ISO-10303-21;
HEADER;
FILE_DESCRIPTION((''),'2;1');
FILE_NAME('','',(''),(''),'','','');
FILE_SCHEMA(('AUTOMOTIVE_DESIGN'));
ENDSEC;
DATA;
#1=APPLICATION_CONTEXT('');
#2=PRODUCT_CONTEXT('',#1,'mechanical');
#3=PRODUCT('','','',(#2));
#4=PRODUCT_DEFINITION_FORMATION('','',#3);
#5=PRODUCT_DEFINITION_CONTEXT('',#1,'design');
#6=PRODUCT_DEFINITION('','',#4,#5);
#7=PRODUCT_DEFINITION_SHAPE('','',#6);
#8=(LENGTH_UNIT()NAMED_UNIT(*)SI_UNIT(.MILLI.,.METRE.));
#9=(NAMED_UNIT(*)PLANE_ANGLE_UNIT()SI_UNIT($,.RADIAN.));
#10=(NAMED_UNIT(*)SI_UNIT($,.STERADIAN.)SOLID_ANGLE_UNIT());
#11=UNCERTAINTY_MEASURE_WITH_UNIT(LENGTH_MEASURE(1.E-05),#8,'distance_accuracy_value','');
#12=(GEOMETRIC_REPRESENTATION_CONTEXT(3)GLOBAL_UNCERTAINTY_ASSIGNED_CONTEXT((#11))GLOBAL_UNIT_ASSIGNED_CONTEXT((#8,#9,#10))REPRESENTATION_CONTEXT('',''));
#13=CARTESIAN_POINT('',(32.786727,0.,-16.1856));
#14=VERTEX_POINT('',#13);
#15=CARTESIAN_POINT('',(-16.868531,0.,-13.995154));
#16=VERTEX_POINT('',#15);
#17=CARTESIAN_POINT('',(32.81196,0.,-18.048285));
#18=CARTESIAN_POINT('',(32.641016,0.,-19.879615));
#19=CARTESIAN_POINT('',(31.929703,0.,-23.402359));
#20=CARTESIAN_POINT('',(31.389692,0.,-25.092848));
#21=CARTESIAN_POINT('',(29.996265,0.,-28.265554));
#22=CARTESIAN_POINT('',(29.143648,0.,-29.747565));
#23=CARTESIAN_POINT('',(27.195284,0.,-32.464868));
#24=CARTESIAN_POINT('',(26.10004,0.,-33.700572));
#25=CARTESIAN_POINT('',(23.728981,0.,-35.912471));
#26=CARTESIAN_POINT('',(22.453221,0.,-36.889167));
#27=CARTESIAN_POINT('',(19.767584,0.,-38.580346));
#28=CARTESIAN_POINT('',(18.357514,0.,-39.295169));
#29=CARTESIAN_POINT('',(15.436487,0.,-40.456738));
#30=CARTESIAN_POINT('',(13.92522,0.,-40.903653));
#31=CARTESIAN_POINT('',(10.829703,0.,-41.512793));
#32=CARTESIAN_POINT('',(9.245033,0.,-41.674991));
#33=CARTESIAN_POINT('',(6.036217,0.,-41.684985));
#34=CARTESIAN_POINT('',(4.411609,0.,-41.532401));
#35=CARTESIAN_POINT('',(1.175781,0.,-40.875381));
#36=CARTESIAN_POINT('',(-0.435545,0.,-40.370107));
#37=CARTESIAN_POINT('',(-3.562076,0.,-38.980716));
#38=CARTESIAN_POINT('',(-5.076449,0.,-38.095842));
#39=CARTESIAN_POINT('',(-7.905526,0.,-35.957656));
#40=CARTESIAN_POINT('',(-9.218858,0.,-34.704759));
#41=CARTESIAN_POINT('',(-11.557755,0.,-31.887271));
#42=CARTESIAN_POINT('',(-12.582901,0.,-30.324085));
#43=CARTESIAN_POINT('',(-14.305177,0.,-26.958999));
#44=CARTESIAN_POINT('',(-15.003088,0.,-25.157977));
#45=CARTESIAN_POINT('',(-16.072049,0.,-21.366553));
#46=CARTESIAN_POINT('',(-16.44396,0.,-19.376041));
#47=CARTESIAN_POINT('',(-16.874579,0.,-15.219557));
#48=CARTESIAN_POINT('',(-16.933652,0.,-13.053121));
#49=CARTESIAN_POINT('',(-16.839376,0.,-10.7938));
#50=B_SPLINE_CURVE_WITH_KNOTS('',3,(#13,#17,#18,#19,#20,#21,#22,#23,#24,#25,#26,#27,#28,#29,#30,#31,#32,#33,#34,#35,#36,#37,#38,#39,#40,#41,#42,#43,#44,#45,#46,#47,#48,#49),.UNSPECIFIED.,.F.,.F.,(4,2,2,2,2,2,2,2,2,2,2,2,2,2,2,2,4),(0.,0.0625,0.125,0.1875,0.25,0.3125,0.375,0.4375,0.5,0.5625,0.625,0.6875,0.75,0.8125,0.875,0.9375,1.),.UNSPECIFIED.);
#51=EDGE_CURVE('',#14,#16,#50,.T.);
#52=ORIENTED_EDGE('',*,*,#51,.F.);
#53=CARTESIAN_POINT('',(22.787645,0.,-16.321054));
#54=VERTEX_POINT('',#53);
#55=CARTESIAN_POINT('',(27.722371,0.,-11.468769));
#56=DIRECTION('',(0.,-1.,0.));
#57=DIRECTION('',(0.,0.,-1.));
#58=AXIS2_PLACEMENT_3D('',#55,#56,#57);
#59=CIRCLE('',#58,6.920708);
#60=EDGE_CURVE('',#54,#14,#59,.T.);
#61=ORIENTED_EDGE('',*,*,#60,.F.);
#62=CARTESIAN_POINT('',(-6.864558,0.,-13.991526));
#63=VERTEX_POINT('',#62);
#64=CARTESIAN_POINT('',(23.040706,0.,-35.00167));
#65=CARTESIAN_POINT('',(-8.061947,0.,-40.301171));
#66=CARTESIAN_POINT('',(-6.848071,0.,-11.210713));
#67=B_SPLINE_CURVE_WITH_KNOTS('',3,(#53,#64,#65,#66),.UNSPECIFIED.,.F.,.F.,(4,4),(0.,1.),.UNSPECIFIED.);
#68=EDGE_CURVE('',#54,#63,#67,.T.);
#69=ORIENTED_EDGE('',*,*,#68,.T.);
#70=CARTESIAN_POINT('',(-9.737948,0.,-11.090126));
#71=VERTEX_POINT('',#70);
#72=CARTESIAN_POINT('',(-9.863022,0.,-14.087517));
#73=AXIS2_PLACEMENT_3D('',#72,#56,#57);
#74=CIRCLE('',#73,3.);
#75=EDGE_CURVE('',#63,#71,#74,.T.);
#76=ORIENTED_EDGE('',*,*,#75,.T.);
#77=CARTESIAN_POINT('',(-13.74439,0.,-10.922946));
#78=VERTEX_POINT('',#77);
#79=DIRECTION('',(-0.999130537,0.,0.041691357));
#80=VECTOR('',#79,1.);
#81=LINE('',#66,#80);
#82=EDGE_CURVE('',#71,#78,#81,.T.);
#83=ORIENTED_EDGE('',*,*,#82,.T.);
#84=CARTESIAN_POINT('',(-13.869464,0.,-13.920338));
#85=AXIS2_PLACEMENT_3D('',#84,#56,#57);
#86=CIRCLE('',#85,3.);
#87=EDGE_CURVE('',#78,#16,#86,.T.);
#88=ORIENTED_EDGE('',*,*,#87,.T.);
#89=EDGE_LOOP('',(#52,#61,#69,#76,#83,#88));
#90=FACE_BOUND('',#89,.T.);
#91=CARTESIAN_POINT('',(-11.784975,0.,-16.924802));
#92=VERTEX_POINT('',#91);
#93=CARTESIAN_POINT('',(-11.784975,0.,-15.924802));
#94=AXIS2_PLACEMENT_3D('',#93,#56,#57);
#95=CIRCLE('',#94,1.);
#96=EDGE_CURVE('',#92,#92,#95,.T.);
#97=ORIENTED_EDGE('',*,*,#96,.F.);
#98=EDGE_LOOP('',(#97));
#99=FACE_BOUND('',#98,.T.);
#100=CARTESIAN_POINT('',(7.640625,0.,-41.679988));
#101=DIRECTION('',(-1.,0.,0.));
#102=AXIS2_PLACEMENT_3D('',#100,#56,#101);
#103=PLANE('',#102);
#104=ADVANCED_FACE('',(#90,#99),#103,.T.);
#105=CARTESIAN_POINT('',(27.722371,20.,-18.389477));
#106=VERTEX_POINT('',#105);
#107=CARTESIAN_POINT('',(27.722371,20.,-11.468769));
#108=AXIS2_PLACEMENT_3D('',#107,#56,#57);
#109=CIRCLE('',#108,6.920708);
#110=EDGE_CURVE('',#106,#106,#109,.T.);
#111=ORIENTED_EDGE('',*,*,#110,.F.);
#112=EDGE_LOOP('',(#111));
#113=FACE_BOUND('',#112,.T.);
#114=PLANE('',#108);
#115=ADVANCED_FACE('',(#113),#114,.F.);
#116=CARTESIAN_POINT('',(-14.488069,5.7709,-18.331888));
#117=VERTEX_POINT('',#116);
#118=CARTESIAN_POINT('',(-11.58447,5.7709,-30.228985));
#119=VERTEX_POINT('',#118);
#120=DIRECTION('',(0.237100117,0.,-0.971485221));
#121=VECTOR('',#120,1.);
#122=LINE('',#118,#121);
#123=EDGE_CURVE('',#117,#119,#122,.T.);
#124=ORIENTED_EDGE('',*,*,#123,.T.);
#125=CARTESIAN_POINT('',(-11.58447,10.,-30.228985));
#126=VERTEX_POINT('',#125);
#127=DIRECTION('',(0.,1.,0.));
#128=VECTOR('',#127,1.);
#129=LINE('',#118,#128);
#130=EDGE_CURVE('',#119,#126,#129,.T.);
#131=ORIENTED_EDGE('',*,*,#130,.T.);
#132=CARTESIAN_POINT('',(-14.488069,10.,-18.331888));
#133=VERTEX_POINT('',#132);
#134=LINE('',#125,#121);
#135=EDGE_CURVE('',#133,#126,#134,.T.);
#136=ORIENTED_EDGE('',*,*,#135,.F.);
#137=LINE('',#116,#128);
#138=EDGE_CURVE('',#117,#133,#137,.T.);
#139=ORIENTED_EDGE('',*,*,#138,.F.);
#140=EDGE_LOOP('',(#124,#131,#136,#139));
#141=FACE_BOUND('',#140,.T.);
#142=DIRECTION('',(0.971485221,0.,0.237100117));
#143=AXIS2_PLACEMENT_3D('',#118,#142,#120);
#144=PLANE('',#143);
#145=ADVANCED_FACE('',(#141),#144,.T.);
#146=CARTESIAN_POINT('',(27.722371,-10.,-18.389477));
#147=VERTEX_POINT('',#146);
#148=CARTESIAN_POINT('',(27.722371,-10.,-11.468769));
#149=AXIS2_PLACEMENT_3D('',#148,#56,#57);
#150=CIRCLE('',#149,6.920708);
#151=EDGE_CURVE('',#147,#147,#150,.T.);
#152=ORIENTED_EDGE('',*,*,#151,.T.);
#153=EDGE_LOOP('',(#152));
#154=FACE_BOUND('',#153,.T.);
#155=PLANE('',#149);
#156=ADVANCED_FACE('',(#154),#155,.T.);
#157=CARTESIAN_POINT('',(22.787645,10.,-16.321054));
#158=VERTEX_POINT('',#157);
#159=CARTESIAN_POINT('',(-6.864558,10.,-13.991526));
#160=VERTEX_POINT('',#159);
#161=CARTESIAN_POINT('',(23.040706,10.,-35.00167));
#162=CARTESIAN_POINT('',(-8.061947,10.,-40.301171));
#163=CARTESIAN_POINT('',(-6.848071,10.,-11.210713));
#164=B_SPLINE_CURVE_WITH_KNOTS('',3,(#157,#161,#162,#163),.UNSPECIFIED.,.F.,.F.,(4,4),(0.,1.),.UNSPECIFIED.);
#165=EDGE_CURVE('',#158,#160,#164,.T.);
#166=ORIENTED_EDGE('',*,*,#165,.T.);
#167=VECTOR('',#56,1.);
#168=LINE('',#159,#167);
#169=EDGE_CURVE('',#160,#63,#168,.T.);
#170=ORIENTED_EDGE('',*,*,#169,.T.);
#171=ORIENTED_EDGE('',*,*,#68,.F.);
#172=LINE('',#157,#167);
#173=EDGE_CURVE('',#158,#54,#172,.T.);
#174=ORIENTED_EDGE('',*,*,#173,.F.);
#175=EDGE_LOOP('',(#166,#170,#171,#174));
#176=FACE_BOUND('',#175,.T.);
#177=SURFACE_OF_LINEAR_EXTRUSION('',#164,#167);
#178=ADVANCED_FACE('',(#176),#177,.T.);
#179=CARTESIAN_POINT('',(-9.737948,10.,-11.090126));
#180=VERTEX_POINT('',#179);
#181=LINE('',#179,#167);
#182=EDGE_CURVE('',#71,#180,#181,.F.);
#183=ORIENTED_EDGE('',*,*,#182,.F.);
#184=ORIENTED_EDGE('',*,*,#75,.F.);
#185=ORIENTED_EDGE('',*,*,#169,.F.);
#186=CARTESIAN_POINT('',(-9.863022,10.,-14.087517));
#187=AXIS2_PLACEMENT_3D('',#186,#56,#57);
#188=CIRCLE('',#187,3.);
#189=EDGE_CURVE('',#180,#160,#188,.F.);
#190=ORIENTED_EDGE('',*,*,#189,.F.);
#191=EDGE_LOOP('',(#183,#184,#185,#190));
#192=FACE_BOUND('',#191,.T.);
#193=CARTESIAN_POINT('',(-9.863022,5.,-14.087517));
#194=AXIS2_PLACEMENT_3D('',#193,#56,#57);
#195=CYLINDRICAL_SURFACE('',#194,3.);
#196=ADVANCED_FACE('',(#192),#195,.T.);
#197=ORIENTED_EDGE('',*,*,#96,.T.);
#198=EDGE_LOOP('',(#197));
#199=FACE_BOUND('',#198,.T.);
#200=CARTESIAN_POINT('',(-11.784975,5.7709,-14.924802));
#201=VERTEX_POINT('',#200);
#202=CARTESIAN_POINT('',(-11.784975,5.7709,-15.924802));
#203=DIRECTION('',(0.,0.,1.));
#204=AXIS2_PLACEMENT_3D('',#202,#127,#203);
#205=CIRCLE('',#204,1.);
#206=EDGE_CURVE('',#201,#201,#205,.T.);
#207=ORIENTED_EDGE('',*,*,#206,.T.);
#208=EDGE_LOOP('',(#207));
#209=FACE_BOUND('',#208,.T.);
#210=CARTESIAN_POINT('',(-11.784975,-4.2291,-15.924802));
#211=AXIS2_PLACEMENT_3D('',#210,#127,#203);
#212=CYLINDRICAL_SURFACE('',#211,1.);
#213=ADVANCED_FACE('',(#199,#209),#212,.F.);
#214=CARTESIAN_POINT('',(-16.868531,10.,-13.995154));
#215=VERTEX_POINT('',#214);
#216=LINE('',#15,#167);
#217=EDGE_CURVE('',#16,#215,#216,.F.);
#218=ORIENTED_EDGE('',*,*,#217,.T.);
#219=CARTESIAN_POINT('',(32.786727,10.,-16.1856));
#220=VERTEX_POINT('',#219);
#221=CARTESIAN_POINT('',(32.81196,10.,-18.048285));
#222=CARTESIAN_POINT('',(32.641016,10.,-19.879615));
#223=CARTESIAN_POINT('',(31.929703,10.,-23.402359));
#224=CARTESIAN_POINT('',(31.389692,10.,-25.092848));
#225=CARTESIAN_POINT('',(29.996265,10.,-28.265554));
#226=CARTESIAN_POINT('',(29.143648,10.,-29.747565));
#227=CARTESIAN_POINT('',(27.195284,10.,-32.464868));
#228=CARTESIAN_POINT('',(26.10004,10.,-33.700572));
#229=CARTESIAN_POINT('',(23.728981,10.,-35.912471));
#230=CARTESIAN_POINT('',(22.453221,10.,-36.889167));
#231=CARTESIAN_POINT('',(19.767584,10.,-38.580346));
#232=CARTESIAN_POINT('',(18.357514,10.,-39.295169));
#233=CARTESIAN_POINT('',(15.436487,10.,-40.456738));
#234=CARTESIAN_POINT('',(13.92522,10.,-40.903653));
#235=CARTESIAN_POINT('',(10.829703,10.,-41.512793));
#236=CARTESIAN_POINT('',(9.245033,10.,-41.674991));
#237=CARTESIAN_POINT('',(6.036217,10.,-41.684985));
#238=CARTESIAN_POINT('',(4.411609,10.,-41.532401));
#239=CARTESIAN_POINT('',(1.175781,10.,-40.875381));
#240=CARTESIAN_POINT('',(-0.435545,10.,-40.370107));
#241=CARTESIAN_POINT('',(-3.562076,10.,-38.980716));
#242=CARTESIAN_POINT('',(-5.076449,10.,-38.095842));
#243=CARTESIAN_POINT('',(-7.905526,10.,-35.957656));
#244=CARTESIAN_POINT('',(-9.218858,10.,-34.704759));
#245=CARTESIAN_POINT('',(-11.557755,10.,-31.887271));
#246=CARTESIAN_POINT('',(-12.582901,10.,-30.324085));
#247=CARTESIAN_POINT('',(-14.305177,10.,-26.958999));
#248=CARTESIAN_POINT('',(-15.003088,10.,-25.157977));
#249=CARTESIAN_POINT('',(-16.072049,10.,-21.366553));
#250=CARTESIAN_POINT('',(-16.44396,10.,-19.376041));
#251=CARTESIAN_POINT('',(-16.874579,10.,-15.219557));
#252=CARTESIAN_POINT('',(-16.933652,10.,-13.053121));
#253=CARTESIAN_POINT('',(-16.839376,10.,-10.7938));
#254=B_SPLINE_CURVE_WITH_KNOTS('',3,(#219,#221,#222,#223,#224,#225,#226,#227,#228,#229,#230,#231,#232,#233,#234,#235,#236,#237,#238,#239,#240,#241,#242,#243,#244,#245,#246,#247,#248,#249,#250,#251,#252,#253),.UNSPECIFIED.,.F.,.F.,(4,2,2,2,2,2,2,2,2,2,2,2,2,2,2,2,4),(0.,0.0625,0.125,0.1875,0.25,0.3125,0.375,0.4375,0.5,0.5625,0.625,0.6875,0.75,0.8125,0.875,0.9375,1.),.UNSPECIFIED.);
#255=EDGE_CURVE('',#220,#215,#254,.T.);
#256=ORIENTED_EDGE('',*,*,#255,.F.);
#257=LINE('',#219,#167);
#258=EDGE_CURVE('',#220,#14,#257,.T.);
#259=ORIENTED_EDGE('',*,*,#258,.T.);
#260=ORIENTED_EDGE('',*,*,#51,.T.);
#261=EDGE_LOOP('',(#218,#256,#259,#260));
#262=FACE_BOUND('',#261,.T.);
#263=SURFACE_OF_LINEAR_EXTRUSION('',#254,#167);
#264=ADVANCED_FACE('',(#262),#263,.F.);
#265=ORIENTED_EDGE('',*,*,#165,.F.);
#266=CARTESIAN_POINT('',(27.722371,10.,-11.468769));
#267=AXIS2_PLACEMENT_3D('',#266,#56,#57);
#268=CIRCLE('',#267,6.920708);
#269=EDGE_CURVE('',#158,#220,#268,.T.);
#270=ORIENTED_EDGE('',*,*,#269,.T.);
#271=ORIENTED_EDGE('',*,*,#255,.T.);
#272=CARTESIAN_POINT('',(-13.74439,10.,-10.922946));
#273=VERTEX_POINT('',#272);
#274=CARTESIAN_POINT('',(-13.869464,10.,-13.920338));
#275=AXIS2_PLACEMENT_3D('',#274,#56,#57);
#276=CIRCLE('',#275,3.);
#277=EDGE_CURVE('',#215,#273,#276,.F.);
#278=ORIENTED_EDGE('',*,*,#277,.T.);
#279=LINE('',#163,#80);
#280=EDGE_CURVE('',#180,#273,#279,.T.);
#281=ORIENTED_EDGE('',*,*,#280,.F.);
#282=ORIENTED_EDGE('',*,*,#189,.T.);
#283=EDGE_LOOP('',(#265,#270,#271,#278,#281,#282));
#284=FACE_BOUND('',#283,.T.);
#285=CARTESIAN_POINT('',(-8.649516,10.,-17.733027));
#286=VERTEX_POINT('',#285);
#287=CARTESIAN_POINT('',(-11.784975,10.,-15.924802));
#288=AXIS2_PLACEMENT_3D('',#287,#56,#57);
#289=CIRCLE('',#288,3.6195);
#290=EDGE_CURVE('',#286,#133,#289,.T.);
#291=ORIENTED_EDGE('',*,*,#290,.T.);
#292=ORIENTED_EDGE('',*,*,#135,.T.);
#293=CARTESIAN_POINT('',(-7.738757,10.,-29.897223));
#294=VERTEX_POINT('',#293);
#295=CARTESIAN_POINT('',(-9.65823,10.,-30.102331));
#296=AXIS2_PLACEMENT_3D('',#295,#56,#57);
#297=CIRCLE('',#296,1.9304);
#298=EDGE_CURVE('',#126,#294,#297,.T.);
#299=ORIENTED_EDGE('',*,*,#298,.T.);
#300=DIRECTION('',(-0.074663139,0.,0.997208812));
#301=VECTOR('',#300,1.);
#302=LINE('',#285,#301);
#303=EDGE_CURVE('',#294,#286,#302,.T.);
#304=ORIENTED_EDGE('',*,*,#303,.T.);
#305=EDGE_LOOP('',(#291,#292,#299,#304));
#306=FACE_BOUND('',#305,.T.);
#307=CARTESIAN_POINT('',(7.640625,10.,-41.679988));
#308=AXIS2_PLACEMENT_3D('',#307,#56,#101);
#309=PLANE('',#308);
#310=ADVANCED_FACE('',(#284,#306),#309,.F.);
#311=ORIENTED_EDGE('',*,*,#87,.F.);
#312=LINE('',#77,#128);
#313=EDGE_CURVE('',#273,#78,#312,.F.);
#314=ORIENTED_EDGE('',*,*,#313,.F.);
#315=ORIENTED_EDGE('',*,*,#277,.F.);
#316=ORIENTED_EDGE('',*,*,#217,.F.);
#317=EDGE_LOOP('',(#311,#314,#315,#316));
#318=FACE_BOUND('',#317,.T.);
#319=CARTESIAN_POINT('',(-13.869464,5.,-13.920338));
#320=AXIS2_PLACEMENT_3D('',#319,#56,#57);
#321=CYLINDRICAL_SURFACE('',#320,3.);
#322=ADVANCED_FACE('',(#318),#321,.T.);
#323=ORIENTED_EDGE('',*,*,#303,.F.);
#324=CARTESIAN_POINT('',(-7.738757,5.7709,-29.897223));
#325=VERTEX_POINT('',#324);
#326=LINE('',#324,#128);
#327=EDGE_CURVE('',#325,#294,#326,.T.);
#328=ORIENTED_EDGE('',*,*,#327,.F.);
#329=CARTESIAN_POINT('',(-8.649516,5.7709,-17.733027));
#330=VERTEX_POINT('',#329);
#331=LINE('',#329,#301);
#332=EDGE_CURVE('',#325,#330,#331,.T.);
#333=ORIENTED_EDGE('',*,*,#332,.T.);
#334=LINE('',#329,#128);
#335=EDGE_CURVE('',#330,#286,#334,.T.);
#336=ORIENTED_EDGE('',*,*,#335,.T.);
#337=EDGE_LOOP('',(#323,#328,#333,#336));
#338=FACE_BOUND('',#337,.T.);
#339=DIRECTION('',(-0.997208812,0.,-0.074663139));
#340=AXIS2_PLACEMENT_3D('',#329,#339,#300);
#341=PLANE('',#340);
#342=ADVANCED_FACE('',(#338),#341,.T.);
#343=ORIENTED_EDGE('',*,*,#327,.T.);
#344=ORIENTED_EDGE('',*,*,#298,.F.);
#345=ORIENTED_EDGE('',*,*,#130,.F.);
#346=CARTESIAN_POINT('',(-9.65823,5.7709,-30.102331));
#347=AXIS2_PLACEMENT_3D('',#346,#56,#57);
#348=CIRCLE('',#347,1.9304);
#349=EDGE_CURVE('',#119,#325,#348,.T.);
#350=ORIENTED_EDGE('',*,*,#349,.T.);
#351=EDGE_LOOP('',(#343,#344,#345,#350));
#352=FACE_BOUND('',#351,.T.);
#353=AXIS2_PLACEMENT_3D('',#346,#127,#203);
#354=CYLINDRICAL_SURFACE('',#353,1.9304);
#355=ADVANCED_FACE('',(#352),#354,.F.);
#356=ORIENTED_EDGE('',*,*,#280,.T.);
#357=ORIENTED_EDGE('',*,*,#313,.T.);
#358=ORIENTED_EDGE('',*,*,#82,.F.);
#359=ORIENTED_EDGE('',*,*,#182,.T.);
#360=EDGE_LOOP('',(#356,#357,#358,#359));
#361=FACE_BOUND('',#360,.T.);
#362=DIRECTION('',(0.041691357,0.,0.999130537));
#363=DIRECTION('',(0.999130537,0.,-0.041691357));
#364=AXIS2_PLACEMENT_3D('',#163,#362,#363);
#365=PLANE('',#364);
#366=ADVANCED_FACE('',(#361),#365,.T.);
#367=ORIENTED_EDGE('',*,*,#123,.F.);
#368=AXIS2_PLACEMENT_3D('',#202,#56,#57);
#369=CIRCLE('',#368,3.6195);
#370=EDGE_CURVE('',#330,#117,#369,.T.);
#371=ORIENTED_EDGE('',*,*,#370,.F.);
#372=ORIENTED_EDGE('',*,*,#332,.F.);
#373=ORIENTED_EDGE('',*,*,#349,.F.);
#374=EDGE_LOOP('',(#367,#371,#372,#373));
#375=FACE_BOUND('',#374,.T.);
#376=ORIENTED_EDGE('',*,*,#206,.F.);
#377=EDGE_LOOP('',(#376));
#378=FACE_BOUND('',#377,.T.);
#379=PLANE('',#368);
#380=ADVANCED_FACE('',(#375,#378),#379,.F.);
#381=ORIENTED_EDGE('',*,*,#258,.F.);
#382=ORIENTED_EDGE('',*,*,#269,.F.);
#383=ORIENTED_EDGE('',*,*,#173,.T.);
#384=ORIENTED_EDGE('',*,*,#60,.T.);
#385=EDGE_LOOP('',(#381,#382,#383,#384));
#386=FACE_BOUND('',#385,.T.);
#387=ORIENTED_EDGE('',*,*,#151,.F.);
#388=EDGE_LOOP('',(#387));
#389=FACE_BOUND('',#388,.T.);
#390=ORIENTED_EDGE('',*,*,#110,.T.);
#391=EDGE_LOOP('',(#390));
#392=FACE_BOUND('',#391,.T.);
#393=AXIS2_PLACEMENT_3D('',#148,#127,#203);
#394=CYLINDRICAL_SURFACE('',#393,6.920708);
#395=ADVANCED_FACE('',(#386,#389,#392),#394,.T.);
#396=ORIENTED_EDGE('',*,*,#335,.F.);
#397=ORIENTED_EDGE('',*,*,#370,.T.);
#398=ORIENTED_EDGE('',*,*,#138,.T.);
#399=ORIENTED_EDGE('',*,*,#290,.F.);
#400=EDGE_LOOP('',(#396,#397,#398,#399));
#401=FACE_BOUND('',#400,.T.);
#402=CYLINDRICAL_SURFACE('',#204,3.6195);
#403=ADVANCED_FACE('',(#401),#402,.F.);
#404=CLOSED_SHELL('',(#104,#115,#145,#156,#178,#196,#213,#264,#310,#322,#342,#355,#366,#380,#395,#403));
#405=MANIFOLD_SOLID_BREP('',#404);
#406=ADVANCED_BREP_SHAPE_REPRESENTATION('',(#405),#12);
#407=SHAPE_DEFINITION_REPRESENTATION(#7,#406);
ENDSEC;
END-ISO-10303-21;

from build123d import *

# Parameters (mm, degrees)
EXTRUDE_THIN1_DEPTH = 10
SKETCH3_R           = 6.920707693
BOSS_EXTRUDE1_DEPTH = 10
BOSS_EXTRUDE3_START = -30
SKETCH6_R           = 6.920707693
BOSS_EXTRUDE3_DEPTH = 30
FILLET5_R           = 3
CUT_EXTRUDE2_DEPTH  = 4.2291
SKETCH8_R           = 1
CUT_EXTRUDE3_DEPTH  = 10


# Read off the part's stored shape, not the designer's step: Extrude-Thin1
with BuildPart() as part:
    # Extrude-Thin1 outline → Extrude-Thin1 (new body)
    with BuildSketch(Plane(origin=(0, 0, 0), x_dir=(1, 0, 0), z_dir=(0, 1, 0))):
        with BuildLine():
            Line((22.787644573, 16.321054497), (32.786727129, 16.185599595))
            add(Edge.make_bspline(
                [(32.786727129, 16.185599595), (32.811960434, 18.048285218), (32.641015725, 19.879615359), (31.92970267, 23.402358796), (31.389692113, 25.092847565), (29.996264529, 28.265553908), (29.143647795, 29.747564833), (27.19528421, 32.464868479), (26.100039873, 33.700572008), (23.728981302, 35.912471104), (22.453221171, 36.889166895), (19.767583781, 38.580346198), (18.357513706, 39.295168947), (15.436486932, 40.456738309), (13.925220488, 40.90365338), (10.829703301, 41.512793064), (9.245032555, 41.674991243), (6.03621689, 41.684984578), (4.411608755, 41.532400863), (1.175780595, 40.875380655), (-0.435544855, 40.370107305), (-3.562076247, 38.980716277), (-5.076448982, 38.095842257), (-7.905525663, 35.957656136), (-9.218857585, 34.704759204), (-11.55775534, 31.887270708), (-12.582900642, 30.324085176), (-14.305177479, 26.958999197), (-15.003087647, 25.157977385), (-16.072049137, 21.36655254), (-16.443959592, 19.376041131), (-16.874579144, 15.219557311), (-16.93365201, 13.053120971), (-16.839375878, 10.793799857)],
                knots=[0, 0, 0, 0, 0.0625, 0.0625, 0.125, 0.125, 0.1875, 0.1875, 0.25, 0.25, 0.3125, 0.3125, 0.375, 0.375, 0.4375, 0.4375, 0.5, 0.5, 0.5625, 0.5625, 0.625, 0.625, 0.6875, 0.6875, 0.75, 0.75, 0.8125, 0.8125, 0.875, 0.875, 0.9375, 0.9375, 1, 1, 1, 1], degree=3))
            Line((-16.839375878, 10.793799857), (-6.848070504, 11.210713427))
            add(Edge.make_bspline(
                [(22.787644573, 16.321054497), (23.040705887, 35.001670137), (-8.061946573, 40.30117097), (-6.848070504, 11.210713427)],
                knots=[0, 0, 0, 0, 1, 1, 1, 1], degree=3))
        make_face()
    extrude(amount=EXTRUDE_THIN1_DEPTH)

    # Sketch3 → Boss-Extrude1 (add)
    with BuildSketch(Plane.XZ):
        with Locations(Location((27.722370723, -11.46876918, 0), (0, 0, 317.034865558))):
            Circle(SKETCH3_R)
    extrude(amount=BOSS_EXTRUDE1_DEPTH)

    # Sketch6 → Boss-Extrude3 (add)
    with BuildSketch(Plane.XZ.offset(10).offset(BOSS_EXTRUDE3_START)):
        with Locations(Location((27.722370723, -11.46876918, 0), (0, 0, 270))):
            Circle(SKETCH6_R)
    extrude(amount=BOSS_EXTRUDE3_DEPTH)

    # Fillet5
    fillet5_edges = [part.edges().sort_by_distance(p)[0] for p in [
        (-6.848070504, 5, -11.210713427),
        (-16.839375878, 5, -10.793799857),
    ]]
    fillet(fillet5_edges, radius=FILLET5_R)

    # Sketch7 → Cut-Extrude2 (cut)
    with BuildSketch(Plane(origin=(0, 10, -10), x_dir=(1, 0, 0), z_dir=(0, -1, 0))):
        with BuildLine():
            Line((-8.649516125, -7.733026517), (-7.738756929, -19.897223008))
            ThreePointArc((-7.738756929, -19.897223008), (-9.492313797, -22.025587149), (-11.58447009, -20.228985455))
            Line((-11.58447009, -20.228985455), (-14.488068719, -8.331888199))
            ThreePointArc((-14.488068719, -8.331888199), (-12.154290458, -2.324192527), (-8.649516125, -7.733026517))
        make_face()
    extrude(amount=CUT_EXTRUDE2_DEPTH, mode=Mode.SUBTRACT)

    # Sketch8 → Cut-Extrude3 (cut)
    with BuildSketch(Plane(origin=(0, 5.7709, 0), x_dir=(1, 0, 0), z_dir=(0, 1, 0))):
        with Locations(Location((-11.784975147, 15.924801705, 0), (0, 0, 270))):
            Circle(SKETCH8_R)
    extrude(amount=-CUT_EXTRUDE3_DEPTH, mode=Mode.SUBTRACT)


solid = part.part
